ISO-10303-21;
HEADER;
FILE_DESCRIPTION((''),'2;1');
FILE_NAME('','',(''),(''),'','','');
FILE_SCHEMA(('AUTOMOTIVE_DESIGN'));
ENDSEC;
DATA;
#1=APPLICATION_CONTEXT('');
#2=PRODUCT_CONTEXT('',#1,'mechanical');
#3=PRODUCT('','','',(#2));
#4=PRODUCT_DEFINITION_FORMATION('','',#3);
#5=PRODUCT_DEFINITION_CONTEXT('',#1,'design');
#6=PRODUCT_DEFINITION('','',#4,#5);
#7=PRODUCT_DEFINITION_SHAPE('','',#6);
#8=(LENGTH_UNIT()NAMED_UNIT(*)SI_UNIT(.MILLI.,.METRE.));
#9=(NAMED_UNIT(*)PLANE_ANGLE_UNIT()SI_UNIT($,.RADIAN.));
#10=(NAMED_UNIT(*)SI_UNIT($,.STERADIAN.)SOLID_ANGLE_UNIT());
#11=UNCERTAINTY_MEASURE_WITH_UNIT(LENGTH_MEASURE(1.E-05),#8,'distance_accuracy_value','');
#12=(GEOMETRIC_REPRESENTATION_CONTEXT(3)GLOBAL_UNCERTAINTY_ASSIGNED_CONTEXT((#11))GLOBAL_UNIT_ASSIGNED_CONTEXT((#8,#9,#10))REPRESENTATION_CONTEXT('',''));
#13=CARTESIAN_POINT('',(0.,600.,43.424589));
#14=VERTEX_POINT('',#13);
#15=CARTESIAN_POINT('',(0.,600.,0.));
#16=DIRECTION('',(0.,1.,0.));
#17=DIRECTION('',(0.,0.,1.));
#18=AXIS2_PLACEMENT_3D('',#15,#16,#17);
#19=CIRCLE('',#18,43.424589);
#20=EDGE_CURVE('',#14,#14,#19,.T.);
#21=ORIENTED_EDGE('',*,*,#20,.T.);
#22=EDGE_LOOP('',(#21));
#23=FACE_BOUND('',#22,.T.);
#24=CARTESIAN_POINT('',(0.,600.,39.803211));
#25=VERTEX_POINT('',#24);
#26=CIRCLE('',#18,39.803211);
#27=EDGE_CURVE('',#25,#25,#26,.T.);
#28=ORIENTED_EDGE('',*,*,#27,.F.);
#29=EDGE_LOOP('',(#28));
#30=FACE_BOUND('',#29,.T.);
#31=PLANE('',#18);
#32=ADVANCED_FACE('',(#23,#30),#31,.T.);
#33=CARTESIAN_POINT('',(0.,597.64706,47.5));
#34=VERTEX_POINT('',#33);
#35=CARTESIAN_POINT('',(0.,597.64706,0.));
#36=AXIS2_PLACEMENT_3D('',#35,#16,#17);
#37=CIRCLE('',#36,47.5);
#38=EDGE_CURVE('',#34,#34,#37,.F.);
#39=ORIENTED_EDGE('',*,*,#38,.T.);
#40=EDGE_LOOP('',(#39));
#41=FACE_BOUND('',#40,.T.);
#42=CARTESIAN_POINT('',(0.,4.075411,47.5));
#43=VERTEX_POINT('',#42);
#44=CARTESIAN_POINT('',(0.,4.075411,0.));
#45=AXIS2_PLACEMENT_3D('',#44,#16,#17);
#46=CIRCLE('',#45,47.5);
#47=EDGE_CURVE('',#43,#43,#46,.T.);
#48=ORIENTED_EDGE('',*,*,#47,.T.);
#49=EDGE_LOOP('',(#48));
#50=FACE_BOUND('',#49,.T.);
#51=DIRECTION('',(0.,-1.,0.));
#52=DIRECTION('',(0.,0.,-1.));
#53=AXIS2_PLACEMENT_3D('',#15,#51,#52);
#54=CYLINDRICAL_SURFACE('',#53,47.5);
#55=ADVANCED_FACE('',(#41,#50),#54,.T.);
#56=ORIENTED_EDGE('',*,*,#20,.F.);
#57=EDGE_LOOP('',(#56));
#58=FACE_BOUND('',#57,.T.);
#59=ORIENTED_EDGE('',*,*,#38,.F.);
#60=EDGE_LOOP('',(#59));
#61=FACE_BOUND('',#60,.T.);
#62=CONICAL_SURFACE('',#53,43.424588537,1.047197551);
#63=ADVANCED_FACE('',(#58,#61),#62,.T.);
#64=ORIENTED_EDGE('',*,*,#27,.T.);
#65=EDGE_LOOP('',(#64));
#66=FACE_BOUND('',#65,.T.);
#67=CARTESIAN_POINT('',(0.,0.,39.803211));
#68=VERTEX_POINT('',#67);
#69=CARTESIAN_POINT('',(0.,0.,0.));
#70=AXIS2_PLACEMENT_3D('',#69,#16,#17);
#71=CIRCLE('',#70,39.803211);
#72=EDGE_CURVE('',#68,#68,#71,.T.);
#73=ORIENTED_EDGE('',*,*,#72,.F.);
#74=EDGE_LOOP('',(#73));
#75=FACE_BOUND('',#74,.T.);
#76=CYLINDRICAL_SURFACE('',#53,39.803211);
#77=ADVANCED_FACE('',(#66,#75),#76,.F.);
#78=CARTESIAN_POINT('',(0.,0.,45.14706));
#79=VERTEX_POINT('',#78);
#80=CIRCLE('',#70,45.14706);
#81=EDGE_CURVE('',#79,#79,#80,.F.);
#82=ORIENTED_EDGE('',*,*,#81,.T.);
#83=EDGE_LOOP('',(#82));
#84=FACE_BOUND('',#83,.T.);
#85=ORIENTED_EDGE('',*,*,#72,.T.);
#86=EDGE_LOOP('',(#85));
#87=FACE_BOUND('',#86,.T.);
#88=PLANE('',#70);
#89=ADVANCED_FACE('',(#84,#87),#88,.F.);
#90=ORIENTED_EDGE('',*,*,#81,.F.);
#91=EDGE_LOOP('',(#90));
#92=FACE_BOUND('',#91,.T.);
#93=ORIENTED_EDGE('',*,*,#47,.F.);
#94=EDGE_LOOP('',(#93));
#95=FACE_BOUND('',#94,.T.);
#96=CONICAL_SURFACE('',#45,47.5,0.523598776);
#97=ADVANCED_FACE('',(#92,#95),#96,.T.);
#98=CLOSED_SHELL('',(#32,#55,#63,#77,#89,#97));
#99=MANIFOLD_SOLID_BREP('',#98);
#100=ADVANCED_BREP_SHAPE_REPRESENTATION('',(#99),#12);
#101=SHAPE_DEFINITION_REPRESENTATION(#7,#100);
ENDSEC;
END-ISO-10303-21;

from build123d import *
from OCP.BRepFilletAPI import BRepFilletAPI_MakeChamfer

# Parameters (mm, degrees)
SKETCH1_R           = 47.5
BOSS_EXTRUDE1_DEPTH = 600
SKETCH2_R           = 39.80321137
CUT_EXTRUDE1_DEPTH  = 604.748706003
CHAMFER1_SIZE       = 2.352939905
CHAMFER1_SIZE2      = 4.075411463


with BuildPart() as part:
    # Sketch1 → Boss-Extrude1 (new body)
    with BuildSketch(Plane(origin=(0, 0, 0), x_dir=(1, 0, 0), z_dir=(0, 1, 0))):
        Circle(SKETCH1_R)
    extrude(amount=BOSS_EXTRUDE1_DEPTH)

    # Sketch2 → Cut-Extrude1 (cut, through all)
    with BuildSketch(Plane(origin=(0, 0, 0), x_dir=(1, 0, 0), z_dir=(0, 1, 0))):
        Circle(SKETCH2_R)
    extrude(amount=CUT_EXTRUDE1_DEPTH, mode=Mode.SUBTRACT)

    # Chamfer1: one chamfer whose edges measure the first distance from different faces: ONE call of the kernel's chamfer builder (chamfer() names one face for all edges)
    chamfer1_edges_1 = [part.edges().sort_by_distance(p)[0] for p in [
        (-47.5, 600, 0),
    ]]
    chamfer1_side_1 = [part.faces().sort_by_distance(p)[0] for p in [
        (-47.5, 300, 0),
    ]]
    chamfer1_edges_2 = [part.edges().sort_by_distance(p)[0] for p in [
        (-47.5, 0, 0),
    ]]
    chamfer1_side_2 = [part.faces().sort_by_distance(p)[0] for p in [
        (-46.156497116, 0, 0),
    ]]
    chamfer1 = BRepFilletAPI_MakeChamfer(part.part.solid().wrapped)
    for e in chamfer1_edges_1:
        chamfer1.Add(CHAMFER1_SIZE, CHAMFER1_SIZE2, e.wrapped, chamfer1_side_1[0].wrapped)  # the first distance lies on this face
    for e in chamfer1_edges_2:
        chamfer1.Add(CHAMFER1_SIZE, CHAMFER1_SIZE2, e.wrapped, chamfer1_side_2[0].wrapped)  # the first distance lies on this face
    add(Compound.cast(chamfer1.Shape()), mode=Mode.REPLACE)


solid = part.part
